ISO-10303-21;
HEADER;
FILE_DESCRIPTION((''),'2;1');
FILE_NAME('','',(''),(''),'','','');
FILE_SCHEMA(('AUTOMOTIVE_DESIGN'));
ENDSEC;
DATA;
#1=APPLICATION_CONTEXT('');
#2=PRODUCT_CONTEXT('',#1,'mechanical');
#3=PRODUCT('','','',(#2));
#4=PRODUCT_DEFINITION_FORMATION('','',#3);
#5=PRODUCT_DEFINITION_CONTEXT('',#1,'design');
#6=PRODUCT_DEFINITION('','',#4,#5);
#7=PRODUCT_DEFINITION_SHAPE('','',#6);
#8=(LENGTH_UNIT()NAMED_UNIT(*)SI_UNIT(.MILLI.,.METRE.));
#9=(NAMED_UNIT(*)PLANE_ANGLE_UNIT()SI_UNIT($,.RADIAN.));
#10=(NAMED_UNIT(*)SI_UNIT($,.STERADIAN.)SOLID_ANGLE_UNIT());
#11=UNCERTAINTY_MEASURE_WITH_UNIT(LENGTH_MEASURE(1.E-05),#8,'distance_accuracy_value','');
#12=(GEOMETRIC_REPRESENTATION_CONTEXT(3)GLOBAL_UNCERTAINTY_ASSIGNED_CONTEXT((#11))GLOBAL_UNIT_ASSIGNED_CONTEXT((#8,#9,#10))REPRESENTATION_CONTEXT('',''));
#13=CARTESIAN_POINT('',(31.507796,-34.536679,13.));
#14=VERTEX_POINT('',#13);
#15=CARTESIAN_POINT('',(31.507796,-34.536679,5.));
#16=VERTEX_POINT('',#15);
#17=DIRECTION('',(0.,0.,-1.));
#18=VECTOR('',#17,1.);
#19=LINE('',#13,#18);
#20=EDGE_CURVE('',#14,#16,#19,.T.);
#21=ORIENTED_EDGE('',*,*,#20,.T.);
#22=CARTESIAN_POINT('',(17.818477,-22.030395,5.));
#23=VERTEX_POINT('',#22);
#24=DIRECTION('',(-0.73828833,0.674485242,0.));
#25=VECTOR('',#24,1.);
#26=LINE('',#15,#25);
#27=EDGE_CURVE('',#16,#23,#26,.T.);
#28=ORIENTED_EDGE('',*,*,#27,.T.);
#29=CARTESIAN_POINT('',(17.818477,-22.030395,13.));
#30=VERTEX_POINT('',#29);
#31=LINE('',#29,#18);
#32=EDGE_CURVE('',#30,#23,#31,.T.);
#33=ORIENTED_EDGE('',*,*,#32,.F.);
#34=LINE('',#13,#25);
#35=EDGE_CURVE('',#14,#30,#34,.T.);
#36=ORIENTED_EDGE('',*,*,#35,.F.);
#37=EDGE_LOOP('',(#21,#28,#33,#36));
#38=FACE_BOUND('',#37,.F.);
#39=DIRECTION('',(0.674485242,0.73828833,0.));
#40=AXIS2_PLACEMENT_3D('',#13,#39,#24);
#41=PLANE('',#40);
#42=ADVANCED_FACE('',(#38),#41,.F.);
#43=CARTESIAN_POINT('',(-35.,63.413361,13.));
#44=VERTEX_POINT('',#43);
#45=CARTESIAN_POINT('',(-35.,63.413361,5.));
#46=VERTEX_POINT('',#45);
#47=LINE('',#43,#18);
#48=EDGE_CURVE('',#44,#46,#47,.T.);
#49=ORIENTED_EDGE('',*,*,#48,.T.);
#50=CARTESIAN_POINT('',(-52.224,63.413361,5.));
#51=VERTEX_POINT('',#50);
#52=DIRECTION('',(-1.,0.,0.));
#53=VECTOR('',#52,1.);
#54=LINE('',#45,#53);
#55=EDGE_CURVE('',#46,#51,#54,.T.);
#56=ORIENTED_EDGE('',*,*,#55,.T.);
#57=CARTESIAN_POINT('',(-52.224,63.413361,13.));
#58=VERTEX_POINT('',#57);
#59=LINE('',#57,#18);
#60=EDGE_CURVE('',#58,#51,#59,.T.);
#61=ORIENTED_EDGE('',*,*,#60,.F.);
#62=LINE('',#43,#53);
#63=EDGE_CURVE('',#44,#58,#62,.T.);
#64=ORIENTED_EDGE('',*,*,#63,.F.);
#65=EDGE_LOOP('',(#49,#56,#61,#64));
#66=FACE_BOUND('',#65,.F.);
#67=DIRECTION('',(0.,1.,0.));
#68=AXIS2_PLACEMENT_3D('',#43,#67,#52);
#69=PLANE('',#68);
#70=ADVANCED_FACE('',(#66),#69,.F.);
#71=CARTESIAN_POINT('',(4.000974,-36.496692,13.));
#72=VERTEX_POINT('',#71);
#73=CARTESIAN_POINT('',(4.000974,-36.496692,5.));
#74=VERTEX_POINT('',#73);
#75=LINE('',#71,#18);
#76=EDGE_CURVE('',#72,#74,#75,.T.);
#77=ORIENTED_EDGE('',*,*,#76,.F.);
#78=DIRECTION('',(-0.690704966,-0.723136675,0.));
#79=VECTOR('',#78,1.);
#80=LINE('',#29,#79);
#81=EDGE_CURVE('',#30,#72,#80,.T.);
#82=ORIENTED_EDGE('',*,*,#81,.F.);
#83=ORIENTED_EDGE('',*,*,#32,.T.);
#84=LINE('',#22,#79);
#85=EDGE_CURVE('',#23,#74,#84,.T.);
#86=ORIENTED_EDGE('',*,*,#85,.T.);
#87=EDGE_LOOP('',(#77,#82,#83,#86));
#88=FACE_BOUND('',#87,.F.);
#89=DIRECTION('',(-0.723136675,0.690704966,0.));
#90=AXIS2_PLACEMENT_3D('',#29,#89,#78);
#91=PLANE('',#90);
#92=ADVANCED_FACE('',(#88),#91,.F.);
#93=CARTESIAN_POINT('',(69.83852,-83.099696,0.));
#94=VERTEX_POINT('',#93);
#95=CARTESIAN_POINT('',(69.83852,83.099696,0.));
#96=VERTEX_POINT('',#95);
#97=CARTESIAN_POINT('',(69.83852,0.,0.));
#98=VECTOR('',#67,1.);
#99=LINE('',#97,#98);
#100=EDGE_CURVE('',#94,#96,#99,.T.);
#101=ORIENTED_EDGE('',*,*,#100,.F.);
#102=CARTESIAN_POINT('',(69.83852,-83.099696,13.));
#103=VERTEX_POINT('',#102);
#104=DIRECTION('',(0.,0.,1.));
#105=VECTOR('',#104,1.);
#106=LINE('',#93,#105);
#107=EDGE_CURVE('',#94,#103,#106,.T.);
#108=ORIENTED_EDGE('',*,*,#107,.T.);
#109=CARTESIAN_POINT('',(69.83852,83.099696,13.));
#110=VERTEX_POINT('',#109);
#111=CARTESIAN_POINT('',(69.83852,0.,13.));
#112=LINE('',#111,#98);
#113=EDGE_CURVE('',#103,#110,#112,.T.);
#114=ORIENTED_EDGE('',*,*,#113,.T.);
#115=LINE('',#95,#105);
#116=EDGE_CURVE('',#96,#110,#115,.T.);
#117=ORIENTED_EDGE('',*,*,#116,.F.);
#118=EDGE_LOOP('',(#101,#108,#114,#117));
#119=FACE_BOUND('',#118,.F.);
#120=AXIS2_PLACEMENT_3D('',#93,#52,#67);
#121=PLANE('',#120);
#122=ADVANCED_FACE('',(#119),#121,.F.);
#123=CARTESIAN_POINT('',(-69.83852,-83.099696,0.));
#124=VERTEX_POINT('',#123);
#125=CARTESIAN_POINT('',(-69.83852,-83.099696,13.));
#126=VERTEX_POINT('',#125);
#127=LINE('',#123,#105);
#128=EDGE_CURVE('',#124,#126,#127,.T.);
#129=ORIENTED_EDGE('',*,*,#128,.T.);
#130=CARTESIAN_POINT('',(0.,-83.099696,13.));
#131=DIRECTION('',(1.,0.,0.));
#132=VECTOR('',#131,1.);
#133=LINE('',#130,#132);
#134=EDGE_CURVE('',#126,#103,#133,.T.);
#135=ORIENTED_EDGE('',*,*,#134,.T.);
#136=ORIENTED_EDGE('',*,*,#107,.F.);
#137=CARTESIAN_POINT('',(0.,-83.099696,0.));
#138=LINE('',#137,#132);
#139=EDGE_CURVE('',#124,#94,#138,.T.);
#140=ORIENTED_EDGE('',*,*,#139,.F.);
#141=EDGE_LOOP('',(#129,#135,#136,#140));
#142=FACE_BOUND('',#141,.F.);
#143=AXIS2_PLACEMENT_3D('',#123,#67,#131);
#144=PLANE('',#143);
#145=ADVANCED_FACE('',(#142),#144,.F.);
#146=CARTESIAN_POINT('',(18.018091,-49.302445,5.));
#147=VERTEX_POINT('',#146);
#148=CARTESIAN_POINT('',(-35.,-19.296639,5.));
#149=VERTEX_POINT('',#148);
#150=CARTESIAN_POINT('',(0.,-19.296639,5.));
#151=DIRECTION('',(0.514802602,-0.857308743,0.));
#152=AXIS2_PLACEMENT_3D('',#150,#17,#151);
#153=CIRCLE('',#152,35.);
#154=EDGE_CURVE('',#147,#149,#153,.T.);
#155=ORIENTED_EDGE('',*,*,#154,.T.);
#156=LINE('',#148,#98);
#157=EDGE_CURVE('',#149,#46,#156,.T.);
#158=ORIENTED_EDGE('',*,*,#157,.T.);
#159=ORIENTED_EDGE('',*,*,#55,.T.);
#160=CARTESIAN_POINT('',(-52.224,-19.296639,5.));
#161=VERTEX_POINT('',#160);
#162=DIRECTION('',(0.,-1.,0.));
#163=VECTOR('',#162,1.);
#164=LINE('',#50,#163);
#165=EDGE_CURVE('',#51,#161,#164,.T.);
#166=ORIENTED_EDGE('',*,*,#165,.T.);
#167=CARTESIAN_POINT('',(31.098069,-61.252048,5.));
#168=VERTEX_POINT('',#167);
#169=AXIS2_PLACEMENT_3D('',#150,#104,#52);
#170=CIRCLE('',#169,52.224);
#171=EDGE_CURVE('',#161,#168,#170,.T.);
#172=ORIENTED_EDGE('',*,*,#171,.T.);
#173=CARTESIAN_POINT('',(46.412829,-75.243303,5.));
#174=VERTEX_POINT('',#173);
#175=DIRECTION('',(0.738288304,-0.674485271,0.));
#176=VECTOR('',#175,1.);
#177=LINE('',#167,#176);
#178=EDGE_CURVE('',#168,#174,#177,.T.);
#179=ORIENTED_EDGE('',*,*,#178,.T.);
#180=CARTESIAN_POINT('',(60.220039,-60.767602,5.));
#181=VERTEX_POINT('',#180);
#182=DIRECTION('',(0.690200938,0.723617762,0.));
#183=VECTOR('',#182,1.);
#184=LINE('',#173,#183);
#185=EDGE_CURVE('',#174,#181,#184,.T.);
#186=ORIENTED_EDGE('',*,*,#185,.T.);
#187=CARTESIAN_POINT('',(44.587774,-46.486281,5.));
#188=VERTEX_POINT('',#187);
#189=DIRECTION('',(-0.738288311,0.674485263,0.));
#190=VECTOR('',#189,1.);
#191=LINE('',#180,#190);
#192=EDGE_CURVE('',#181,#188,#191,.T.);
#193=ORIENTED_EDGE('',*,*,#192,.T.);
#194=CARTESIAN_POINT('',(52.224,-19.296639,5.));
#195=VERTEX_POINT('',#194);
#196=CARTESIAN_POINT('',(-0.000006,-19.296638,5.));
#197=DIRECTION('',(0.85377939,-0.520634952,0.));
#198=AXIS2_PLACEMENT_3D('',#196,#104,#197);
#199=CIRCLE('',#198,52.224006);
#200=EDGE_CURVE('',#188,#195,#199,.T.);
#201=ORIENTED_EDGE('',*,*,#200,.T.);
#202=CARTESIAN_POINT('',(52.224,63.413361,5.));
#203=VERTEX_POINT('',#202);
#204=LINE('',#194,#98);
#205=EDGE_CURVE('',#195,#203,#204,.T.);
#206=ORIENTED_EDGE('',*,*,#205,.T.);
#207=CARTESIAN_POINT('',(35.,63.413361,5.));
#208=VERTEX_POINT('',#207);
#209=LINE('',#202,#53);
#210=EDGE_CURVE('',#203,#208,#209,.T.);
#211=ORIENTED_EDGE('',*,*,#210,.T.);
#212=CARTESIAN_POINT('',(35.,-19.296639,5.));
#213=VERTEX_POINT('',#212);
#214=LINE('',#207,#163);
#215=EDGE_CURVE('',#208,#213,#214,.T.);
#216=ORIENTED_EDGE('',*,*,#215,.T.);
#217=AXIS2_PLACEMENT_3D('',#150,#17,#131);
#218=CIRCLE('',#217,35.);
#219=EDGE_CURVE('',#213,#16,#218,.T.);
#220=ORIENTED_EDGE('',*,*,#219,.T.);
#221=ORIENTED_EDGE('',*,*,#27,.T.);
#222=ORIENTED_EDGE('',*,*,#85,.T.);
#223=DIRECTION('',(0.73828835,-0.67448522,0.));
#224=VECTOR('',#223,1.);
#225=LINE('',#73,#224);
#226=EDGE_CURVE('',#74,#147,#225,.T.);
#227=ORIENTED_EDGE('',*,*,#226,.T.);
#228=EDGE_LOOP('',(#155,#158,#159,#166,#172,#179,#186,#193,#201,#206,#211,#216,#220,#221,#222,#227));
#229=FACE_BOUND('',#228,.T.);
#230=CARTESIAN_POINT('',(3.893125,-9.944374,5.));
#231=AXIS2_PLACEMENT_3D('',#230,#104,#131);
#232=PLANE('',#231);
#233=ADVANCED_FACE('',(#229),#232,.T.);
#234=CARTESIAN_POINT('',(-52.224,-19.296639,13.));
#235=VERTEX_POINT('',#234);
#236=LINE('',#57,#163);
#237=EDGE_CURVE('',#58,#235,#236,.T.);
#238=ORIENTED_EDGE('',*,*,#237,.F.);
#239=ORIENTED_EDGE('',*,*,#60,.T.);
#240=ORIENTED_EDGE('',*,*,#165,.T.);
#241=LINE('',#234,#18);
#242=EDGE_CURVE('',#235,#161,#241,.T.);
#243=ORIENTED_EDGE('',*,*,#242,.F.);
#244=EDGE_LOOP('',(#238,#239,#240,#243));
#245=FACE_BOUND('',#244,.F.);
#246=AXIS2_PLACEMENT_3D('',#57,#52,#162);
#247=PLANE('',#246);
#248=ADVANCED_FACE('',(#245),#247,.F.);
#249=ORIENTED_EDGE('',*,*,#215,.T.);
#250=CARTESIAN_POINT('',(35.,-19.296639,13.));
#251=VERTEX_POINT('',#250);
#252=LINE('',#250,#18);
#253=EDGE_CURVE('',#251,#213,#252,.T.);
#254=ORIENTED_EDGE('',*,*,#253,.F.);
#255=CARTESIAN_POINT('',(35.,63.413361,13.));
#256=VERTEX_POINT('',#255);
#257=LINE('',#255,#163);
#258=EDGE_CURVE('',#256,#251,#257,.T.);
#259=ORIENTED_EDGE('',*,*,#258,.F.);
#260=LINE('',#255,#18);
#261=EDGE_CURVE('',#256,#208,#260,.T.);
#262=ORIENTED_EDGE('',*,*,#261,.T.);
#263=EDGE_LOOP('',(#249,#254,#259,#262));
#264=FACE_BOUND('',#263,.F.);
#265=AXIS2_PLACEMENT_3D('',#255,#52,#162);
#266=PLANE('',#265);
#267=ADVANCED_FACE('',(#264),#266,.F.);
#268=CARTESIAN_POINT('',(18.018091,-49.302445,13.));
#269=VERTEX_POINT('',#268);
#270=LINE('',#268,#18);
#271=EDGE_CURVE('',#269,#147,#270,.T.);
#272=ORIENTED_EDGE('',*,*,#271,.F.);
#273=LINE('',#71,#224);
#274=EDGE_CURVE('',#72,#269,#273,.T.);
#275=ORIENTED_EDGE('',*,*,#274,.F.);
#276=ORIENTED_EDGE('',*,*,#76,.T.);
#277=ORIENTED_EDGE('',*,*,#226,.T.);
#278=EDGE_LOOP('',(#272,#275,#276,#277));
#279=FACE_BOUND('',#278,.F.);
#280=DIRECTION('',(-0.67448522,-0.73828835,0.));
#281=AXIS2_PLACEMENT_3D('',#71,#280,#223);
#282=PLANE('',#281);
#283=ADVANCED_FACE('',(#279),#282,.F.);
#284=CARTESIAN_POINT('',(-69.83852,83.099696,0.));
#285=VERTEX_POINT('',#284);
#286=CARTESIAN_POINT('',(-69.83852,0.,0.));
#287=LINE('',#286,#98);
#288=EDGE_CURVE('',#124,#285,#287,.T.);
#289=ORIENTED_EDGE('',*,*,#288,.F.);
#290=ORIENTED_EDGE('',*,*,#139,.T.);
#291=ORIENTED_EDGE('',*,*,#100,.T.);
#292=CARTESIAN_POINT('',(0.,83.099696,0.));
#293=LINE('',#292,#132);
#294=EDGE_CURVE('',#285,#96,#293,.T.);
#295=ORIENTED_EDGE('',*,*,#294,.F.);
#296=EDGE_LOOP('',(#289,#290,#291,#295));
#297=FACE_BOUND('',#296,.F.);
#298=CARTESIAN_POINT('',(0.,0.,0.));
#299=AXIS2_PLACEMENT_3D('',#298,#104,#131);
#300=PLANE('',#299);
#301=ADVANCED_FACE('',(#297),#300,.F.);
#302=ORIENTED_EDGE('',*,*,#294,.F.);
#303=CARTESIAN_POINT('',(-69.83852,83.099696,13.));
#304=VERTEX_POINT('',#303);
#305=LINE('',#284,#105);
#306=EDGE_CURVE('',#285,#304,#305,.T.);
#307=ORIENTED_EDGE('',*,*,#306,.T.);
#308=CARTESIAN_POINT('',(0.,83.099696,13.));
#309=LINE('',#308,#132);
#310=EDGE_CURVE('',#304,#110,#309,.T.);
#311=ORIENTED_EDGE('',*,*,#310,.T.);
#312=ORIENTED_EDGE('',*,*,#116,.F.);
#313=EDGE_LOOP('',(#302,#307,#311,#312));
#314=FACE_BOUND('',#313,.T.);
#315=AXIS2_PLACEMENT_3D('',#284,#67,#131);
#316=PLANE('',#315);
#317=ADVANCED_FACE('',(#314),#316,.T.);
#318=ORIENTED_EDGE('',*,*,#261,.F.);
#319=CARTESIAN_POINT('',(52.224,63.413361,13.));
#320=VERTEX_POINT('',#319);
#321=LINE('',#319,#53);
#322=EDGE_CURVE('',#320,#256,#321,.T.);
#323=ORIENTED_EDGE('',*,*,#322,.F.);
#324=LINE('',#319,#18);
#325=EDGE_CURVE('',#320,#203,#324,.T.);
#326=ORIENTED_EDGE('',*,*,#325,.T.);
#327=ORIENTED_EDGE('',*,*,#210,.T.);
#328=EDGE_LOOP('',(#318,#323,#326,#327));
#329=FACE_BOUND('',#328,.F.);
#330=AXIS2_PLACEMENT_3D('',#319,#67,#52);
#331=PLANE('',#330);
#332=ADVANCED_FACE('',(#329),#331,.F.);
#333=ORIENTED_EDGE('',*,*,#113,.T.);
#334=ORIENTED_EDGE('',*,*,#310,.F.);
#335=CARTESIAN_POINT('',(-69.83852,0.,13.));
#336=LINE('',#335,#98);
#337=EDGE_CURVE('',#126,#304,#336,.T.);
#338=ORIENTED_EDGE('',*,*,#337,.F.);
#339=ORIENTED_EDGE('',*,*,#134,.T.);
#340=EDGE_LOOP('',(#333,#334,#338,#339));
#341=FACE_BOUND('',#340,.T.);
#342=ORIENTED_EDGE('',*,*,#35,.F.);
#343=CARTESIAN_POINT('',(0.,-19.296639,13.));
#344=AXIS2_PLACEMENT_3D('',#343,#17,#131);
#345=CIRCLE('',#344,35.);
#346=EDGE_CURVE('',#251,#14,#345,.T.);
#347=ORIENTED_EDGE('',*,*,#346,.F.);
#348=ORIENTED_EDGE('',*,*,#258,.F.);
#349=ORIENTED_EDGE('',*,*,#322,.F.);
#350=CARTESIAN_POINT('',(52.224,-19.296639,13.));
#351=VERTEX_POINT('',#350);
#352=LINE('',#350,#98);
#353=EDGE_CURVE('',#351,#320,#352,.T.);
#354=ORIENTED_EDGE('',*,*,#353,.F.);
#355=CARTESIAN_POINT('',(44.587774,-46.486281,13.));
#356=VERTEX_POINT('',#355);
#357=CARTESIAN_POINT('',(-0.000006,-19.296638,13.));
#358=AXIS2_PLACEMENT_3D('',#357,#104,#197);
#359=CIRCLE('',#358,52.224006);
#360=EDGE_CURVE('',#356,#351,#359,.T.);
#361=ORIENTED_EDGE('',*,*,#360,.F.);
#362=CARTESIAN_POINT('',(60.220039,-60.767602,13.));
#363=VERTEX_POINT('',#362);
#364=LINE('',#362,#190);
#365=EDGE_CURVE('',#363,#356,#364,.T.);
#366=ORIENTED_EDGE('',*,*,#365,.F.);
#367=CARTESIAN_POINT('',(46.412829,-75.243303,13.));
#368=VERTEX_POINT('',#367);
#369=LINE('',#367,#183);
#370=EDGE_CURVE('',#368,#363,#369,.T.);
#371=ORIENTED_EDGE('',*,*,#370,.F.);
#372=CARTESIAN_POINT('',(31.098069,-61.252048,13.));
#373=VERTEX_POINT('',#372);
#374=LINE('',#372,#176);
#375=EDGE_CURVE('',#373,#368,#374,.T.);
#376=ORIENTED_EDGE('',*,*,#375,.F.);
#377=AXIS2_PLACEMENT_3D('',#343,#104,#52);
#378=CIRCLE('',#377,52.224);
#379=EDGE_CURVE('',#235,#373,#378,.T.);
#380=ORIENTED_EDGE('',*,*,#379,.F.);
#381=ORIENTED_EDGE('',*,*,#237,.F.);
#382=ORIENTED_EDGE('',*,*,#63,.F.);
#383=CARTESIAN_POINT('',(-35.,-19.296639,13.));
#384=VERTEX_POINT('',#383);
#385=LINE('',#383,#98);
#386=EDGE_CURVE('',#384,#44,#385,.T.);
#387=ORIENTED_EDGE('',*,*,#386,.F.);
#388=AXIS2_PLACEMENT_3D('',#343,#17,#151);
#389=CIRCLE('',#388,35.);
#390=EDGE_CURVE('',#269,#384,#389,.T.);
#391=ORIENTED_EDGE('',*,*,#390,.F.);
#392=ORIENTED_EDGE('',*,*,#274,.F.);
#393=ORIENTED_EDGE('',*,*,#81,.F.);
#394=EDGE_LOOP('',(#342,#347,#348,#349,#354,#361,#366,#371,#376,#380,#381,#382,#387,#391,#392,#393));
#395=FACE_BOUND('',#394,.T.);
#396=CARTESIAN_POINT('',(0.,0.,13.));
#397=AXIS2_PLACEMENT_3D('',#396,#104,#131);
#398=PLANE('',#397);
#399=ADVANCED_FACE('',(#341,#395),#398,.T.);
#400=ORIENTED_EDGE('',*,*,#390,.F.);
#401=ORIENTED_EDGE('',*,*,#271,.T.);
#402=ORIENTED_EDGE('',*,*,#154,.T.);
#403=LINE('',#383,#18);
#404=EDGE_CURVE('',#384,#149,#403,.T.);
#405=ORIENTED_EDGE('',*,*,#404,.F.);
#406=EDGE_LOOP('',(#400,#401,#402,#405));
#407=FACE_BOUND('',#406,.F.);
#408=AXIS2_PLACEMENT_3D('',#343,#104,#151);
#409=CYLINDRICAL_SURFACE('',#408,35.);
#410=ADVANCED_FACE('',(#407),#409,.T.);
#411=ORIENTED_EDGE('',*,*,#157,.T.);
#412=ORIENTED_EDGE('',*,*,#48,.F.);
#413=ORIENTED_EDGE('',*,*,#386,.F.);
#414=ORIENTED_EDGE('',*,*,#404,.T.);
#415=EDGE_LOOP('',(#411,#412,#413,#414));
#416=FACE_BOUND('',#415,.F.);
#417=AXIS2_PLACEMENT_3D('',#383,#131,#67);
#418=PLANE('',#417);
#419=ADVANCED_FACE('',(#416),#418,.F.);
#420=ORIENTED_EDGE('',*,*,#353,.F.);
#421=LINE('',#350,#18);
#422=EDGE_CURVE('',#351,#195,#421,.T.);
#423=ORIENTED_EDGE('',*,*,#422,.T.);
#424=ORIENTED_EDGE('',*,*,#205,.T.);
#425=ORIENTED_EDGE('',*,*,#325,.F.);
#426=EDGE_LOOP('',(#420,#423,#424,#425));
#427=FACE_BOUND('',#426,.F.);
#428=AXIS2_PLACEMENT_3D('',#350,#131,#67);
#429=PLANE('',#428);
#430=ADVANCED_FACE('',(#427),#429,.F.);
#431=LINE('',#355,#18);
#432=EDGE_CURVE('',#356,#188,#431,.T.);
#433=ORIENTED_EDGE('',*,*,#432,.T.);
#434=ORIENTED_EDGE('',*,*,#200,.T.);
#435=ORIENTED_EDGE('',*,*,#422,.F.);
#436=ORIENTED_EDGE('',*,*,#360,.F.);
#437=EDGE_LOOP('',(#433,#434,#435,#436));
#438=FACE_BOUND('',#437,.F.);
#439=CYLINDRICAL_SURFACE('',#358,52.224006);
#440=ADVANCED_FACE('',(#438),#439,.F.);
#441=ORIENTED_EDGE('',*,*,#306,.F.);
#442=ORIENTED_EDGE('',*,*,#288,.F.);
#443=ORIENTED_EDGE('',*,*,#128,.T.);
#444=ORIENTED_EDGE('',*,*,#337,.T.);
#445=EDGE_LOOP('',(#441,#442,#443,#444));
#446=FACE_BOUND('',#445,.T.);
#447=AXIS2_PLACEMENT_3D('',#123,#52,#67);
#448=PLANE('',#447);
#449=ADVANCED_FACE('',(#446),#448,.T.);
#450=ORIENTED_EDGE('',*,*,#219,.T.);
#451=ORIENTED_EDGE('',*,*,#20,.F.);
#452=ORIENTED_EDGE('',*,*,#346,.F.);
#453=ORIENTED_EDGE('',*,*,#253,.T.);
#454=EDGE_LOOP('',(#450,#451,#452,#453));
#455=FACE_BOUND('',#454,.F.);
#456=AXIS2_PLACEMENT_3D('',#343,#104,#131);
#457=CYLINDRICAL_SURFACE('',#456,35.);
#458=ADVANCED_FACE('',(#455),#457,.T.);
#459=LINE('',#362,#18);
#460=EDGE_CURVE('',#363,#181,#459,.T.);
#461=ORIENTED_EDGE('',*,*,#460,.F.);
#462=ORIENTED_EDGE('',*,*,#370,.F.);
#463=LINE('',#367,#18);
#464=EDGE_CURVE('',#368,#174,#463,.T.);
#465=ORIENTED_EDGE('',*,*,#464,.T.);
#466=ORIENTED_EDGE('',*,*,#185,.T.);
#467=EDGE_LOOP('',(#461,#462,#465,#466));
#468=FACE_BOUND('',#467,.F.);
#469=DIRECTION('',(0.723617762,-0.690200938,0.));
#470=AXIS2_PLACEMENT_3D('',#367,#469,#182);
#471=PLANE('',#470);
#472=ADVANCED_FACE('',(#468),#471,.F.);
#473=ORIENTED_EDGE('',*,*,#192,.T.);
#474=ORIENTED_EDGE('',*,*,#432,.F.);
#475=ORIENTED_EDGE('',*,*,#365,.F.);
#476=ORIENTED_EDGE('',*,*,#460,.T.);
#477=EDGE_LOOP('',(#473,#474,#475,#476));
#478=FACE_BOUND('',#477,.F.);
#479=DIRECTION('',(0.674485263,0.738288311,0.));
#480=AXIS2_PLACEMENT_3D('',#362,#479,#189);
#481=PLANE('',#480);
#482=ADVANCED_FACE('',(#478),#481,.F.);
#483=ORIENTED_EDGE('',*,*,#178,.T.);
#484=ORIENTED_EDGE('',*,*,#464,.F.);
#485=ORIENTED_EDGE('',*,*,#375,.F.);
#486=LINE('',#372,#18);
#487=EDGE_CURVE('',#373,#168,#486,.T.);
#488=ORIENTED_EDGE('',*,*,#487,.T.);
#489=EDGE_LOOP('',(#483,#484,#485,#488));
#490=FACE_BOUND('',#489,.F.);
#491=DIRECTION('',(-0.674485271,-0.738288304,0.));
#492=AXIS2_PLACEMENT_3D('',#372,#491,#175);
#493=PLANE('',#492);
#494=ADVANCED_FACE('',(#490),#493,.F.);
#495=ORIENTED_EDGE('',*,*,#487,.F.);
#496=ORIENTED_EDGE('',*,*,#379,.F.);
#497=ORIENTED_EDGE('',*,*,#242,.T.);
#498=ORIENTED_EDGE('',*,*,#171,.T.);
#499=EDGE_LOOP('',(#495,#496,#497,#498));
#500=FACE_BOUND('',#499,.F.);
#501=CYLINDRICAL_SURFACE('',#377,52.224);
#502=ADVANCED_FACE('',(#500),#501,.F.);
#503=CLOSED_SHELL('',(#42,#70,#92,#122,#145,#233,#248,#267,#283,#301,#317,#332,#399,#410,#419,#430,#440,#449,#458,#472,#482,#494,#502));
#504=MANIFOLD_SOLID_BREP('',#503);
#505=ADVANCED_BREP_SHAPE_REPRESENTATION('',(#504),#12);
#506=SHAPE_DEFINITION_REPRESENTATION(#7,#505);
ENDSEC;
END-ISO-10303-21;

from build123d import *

# Parameters (mm, degrees)
F0_W     = 139.677039
F0_H     = 166.199392
F1_DEPTH = 13
F3_DEPTH = 8


# Not quite as in the source:
# - ends of sketch curves that miss each other by under 0.0002 mm in the source are joined


with BuildPart() as f1:
    # F0 (on Top) → F1 (new body)
    with BuildSketch(Plane.XY):
        with Locations((5e-07, 0)):
            Rectangle(F0_W, F0_H)
    extrude(amount=F1_DEPTH)

    # F2 (on face) → F3 (cut)
    with BuildSketch(Plane.XY.offset(13)):
        with BuildLine():
            Line((-52.224, 63.413361), (-52.224, -19.296639))
            ThreePointArc((-52.224, -19.296639), (-23.4870244983, -65.9411012245), (31.0980686358, -61.2520475086))
            Line((31.0980686358, -61.2520475086), (46.412829, -75.243303))
            Line((46.412829, -75.243303), (60.220039, -60.767602))
            Line((60.220039, -60.767602), (44.587774, -46.486281))
            ThreePointArc((44.587774, -46.486281), (50.2787135157, -33.4174443314), (52.224, -19.296639))
            Line((52.224, -19.296639), (52.224, 63.413361))
            Line((52.224, 63.413361), (35, 63.413361))
            Line((35, 63.413361), (35, -19.296639))
            ThreePointArc((35, -19.296639), (34.1157796878, -27.1141562719), (31.5077956402, -34.536678826))
            Line((31.5077956402, -34.536678826), (17.818477, -22.030395))
            Line((17.818477, -22.030395), (4.000974, -36.496692))
            Line((4.000974, -36.496692), (18.018091, -49.302445))
            ThreePointArc((18.018091, -49.302445), (-17.2390082984, -49.756720958), (-35, -19.296639))
            Line((-35, -19.296639), (-35, 63.413361))
            Line((-35, 63.413361), (-52.224, 63.413361))
        make_face()
    extrude(amount=-F3_DEPTH, mode=Mode.SUBTRACT)


solid = f1.part
